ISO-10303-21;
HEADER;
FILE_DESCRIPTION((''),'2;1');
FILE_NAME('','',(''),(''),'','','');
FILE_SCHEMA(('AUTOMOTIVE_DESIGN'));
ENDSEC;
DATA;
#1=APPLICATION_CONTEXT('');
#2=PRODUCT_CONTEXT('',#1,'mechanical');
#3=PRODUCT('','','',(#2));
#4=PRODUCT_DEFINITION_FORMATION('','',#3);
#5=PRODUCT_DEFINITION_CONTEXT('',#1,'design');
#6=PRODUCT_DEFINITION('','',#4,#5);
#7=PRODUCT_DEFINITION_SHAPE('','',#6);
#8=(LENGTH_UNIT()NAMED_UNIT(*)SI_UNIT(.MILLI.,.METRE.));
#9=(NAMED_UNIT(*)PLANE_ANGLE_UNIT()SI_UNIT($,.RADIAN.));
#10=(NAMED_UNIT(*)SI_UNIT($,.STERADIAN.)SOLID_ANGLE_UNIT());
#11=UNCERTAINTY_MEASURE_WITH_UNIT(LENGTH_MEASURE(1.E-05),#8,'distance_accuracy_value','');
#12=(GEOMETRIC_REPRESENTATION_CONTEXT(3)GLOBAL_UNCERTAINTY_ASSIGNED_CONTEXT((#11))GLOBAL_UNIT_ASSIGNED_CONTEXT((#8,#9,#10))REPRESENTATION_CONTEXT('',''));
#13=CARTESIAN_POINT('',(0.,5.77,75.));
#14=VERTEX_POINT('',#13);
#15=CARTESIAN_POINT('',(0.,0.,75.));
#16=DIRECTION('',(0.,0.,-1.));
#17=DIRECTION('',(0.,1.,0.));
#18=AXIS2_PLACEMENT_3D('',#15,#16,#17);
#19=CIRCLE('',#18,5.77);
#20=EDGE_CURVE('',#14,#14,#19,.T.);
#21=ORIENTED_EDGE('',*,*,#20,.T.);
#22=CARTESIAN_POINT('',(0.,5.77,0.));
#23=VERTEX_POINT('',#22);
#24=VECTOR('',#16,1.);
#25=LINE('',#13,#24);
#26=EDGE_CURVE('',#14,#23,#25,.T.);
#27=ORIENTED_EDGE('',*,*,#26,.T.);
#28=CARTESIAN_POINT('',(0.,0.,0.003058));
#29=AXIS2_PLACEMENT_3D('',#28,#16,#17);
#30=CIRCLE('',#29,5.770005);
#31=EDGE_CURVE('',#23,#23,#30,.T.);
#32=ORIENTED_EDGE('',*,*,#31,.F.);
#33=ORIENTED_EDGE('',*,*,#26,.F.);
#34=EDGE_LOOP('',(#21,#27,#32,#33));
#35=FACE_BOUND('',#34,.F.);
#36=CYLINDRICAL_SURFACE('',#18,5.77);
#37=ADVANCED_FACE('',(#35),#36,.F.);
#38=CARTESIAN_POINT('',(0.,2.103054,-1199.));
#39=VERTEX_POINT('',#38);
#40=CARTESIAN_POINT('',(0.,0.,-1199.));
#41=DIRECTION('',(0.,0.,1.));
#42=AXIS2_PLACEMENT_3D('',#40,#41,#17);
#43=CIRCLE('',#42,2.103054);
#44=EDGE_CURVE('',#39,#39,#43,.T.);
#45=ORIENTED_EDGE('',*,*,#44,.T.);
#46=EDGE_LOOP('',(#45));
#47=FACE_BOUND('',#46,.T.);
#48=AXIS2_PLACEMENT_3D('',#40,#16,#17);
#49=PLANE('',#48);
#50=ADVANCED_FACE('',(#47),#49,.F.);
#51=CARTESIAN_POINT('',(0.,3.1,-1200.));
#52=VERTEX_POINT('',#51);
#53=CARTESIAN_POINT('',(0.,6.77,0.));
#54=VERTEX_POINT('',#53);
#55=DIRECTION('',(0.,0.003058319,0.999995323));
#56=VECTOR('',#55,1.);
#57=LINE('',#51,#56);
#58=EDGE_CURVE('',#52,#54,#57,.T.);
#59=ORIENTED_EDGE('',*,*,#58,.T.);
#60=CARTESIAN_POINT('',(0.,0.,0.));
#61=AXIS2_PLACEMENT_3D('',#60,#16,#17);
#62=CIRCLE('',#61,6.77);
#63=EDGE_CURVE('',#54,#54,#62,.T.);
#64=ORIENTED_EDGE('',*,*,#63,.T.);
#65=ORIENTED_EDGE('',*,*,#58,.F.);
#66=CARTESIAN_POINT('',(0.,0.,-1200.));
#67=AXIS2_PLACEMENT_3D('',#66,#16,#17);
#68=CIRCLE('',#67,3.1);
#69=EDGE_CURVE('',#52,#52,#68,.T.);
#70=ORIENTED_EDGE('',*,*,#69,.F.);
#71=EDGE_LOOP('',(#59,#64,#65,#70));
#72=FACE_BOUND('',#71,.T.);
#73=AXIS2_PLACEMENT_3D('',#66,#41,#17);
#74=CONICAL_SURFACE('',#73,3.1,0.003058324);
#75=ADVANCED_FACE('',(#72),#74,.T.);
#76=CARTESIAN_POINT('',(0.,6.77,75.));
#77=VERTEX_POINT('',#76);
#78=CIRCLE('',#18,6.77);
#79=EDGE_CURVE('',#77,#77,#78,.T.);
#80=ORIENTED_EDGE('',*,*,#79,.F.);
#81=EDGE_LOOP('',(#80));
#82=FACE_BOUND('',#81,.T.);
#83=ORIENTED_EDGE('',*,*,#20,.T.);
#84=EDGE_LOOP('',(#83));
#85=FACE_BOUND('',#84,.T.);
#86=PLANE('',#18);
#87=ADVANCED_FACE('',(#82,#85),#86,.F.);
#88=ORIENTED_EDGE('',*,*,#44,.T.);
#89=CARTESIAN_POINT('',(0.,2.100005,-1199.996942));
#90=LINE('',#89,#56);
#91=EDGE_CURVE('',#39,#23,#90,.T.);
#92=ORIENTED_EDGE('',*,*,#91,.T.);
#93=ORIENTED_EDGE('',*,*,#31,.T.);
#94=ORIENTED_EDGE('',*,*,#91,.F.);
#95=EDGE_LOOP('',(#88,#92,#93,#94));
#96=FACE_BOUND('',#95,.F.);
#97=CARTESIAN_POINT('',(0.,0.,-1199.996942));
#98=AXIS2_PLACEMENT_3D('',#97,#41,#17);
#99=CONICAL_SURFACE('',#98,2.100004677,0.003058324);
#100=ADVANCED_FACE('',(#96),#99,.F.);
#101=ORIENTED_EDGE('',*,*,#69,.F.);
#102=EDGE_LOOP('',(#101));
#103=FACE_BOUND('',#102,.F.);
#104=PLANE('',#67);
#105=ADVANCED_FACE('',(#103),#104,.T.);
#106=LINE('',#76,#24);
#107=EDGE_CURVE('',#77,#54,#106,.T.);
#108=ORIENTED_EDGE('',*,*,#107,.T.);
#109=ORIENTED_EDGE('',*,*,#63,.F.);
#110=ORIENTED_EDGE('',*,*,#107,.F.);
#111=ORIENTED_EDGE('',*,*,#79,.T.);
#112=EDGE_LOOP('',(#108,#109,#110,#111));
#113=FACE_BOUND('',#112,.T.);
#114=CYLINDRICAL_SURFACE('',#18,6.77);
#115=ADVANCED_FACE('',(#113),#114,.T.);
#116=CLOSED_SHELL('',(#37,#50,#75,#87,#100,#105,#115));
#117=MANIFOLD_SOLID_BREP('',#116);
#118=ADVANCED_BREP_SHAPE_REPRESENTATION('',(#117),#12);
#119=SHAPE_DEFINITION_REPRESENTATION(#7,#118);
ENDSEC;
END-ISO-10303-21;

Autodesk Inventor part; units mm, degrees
ref_plane "YZ Plane" through (0, 0, 0) normal (1, 0, 0) x (0, 1, 0)
ref_plane "XZ Plane" through (0, 0, 0) normal (0, 1, 0) x (-1, 0, 0)
ref_plane "XY Plane" through (0, 0, 0) normal (0, 0, 1) x (1, 0, 0)
sketch "Sketch1" plane through (0, 0, 0) normal (1, 0, 0) x (0, 1, 0)
  point P0 (0, 0)
sketch "Sketch2" plane through (0, 0, 0) normal (1, 0, 0) x (0, 1, 0)
  line L0 (0, 0) -> (6.77, 0)
  line L1 (0, 0) -> (0, -1200)
  line L2 (0, -1200) -> (3.1, -1200)
  line L3 (3.1, -1200) -> (6.77, 0)
  line L4 (0, 0) -> (0, 75)
  line L5 (0, 75) -> (6.77, 75)
  line L6 (6.77, 75) -> (6.77, 0)
  dimension "d0" = 6.77
  dimension "d1" = 1200
  dimension "d2" = 3.1
  dimension "d5" = 75
revolve "Revolution1" add sketch "Sketch2" angle 360 about axis through (0, 0, 0) along (0, 0, -1)
shell "Shell1" thickness 1 removed faces 1 at (1.6044, -0.8002, 75)
properties part number "False Rear Spar Final" material "CFRP"
